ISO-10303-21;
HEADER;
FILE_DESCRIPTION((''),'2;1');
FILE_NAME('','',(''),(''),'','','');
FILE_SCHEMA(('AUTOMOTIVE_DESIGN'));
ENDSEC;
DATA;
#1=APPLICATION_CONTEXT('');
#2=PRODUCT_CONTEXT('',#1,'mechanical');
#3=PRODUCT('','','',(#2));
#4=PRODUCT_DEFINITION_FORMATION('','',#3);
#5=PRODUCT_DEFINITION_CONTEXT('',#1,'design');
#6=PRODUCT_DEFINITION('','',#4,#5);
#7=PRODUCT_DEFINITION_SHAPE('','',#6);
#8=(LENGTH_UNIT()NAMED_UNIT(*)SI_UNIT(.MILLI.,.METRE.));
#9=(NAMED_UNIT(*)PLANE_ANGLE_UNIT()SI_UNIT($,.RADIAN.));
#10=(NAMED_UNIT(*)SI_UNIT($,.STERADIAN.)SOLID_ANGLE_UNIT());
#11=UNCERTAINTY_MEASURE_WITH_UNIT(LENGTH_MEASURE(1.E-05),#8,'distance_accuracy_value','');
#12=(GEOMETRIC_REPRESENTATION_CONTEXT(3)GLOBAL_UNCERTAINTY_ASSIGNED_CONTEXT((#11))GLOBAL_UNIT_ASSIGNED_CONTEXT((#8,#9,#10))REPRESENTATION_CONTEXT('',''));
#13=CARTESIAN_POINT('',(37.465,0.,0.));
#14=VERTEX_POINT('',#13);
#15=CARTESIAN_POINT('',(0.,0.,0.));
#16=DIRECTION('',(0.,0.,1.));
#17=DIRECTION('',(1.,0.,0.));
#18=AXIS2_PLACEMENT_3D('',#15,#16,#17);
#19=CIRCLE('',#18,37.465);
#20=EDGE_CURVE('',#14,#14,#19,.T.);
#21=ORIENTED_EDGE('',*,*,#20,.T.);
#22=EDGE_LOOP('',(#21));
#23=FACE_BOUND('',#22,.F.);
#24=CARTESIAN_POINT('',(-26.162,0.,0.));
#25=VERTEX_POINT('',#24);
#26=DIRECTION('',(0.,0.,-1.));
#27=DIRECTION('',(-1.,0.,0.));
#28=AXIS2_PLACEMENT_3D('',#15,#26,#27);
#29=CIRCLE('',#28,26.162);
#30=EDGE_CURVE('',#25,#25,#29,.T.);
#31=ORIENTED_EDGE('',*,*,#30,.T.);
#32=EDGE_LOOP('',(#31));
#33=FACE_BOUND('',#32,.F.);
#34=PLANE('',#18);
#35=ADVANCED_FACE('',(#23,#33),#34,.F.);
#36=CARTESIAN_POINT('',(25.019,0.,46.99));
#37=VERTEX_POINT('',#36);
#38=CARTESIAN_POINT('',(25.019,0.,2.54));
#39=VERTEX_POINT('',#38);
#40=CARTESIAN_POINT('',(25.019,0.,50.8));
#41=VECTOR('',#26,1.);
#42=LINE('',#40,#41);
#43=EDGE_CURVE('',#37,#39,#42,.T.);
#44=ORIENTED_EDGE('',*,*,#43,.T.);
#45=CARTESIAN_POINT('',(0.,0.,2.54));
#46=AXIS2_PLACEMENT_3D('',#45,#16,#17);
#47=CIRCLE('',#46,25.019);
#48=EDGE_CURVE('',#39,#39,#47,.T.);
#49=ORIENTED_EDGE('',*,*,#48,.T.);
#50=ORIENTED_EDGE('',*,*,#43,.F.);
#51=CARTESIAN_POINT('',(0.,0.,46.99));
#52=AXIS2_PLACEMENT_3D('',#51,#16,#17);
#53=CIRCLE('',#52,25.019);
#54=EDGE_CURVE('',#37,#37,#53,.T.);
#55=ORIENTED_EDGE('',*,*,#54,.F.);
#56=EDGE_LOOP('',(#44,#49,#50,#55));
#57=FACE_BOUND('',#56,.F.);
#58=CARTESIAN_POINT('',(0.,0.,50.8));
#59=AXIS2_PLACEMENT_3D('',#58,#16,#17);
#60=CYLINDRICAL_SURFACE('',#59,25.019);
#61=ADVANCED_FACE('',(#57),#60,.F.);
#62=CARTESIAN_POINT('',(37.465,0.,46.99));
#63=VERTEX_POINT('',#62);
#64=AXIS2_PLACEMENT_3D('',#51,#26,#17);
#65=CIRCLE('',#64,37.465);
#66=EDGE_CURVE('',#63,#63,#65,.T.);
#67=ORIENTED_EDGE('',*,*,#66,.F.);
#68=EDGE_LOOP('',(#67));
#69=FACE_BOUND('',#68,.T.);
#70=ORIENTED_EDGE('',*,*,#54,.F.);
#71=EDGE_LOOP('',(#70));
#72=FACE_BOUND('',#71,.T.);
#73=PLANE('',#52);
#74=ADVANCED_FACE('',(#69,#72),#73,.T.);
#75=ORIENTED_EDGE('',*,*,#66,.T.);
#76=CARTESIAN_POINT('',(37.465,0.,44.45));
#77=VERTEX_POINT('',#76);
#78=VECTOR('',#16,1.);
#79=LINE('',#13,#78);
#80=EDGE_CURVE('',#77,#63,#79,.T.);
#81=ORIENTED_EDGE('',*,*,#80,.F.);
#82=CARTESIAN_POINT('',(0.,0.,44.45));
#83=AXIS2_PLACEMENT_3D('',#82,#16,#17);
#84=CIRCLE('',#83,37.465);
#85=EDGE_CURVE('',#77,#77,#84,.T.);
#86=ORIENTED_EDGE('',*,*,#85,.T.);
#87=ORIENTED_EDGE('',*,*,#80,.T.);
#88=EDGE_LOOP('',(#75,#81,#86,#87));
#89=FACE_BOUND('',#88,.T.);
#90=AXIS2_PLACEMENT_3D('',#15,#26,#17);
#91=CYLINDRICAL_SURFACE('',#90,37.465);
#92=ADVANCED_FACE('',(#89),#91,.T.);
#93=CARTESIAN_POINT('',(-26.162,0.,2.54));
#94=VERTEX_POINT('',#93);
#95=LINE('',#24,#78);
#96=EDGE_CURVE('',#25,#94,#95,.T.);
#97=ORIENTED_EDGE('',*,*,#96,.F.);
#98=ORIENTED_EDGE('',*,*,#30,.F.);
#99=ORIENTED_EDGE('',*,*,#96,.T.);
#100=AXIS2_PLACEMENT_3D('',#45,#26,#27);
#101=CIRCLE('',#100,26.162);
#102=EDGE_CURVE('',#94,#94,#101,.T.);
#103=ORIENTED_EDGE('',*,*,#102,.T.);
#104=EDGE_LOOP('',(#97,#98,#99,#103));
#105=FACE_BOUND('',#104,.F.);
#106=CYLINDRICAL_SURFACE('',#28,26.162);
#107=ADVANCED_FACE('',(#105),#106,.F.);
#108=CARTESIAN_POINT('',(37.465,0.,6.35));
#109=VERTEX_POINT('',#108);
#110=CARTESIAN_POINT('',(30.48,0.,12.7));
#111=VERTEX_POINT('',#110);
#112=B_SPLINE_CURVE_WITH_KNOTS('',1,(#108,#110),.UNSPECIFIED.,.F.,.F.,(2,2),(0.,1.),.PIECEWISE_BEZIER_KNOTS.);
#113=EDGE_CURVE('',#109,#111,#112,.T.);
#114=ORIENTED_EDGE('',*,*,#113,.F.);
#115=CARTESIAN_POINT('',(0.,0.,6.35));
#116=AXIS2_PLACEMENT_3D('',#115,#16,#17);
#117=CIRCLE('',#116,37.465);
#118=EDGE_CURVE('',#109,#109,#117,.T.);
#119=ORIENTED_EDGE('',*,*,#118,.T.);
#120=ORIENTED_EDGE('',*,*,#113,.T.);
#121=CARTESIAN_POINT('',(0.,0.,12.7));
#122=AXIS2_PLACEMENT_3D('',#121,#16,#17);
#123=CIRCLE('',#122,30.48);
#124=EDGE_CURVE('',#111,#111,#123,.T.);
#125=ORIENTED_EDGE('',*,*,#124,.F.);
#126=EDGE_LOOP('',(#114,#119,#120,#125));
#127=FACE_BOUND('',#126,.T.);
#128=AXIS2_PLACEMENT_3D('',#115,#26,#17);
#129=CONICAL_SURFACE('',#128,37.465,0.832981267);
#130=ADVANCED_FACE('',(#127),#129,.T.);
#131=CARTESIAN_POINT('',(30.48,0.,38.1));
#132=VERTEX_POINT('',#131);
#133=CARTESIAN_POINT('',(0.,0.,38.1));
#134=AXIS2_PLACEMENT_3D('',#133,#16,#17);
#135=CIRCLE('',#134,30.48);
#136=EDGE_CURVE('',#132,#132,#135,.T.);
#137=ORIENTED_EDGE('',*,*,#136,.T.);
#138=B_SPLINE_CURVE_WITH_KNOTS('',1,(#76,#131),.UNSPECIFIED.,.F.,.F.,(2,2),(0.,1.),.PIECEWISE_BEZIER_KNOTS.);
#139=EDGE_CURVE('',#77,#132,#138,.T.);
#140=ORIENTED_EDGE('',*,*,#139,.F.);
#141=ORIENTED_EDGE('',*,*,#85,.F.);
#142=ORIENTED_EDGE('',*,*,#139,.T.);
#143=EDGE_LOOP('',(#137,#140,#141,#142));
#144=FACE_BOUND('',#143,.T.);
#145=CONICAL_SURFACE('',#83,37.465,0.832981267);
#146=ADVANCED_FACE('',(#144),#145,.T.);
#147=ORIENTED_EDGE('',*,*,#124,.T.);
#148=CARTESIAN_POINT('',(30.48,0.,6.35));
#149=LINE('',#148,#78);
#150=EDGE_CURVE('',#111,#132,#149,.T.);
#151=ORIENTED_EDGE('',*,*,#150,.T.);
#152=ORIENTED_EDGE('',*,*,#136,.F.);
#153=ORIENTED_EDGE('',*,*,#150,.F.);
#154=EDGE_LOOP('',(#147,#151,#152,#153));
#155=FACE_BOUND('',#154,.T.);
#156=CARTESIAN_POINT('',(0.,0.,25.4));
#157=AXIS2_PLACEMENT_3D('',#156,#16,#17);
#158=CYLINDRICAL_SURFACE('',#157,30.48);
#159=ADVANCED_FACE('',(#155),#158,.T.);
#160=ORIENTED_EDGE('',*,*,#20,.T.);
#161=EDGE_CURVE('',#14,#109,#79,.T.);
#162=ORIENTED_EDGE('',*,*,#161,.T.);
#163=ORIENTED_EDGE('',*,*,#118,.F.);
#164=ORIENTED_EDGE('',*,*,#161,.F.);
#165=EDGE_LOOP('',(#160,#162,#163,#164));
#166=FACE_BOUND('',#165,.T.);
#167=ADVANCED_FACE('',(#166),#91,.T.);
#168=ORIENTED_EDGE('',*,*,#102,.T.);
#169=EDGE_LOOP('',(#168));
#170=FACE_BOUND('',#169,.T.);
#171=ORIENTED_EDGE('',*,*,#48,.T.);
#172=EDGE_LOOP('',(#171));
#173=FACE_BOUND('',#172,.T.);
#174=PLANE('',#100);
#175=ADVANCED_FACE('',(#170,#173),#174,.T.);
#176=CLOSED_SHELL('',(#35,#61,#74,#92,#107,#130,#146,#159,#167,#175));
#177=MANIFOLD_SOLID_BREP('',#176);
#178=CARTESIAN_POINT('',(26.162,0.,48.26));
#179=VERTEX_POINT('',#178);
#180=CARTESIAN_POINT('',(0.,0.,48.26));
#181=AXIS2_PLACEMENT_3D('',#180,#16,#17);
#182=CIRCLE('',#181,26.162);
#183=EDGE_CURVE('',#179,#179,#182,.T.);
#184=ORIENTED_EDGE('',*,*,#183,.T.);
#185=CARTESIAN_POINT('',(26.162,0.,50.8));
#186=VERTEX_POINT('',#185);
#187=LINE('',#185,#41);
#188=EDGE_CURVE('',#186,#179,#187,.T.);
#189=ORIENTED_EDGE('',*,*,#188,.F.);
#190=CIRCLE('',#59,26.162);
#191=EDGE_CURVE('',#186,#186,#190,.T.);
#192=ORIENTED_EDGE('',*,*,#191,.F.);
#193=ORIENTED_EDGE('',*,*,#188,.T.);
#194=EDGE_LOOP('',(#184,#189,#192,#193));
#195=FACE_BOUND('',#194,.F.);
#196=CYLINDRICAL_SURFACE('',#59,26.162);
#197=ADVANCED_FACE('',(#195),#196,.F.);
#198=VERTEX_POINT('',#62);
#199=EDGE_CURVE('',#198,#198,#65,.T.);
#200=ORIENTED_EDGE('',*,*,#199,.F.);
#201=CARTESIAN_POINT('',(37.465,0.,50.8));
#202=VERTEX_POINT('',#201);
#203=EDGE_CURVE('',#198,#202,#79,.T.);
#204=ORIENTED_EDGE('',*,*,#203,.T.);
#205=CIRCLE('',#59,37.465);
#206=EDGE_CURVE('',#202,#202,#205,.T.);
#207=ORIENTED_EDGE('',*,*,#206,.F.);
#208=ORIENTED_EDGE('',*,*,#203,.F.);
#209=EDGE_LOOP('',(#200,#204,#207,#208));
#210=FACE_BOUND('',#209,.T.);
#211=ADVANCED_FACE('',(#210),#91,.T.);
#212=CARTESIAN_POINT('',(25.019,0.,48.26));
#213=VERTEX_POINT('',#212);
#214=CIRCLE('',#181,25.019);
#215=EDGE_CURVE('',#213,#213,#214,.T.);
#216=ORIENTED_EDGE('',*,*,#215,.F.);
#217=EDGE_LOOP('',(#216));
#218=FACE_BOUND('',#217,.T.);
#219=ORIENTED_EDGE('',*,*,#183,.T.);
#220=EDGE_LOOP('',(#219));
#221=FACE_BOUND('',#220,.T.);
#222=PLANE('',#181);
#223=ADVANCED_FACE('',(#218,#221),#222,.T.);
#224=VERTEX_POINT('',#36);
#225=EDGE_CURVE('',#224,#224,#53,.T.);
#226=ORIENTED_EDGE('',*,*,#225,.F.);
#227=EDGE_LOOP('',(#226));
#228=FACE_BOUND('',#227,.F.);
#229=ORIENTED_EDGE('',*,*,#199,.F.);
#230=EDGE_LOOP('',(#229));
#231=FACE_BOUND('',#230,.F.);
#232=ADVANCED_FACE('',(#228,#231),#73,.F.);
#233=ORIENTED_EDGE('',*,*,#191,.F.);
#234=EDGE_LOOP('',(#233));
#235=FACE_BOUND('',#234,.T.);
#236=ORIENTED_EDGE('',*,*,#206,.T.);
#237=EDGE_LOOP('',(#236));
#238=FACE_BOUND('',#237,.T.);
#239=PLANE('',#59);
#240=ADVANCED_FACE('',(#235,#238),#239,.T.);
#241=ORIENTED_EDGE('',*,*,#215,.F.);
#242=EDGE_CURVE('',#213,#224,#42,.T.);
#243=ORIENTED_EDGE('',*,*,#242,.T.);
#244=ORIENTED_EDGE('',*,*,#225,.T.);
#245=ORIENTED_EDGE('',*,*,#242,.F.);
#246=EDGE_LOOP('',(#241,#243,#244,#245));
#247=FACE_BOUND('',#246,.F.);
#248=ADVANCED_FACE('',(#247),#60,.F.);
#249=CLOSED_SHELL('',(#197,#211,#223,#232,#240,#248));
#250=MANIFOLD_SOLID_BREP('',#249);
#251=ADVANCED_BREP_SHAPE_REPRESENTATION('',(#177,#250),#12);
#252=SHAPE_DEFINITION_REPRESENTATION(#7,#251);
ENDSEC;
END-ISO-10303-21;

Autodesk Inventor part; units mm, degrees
ref_plane "YZ Plane" through (0, 0, 0) normal (1, 0, 0) x (0, 1, 0)
ref_plane "XZ Plane" through (0, 0, 0) normal (0, 1, 0) x (-1, 0, 0)
sketch "Sketch1" plane through (0, 0, 0) normal (0, 0, 1) x (1, 0, 0)
  circle A0 centre (0, 0) radius 37.465
  dimension "d0" = 74.93
extrude "Extrusion1" add sketch "Sketch1" along normal blind 50.8
sketch "Sketch3" plane through (0, 0, 50.8) normal (0, 0, 1) x (1, 0, 0)
  circle A0 centre (0, 0) radius 26.162
  dimension "d6" = 52.324
extrude "Extrusion3" cut sketch "Sketch3" against normal blind 2.54
sketch "Sketch4" plane through (0, 0, 0) normal (0, 0, -1) x (-1, 0, 0)
  circle A0 centre (0, 0) radius 26.162
  dimension "d9" = 52.324
extrude "Extrusion4" cut sketch "Sketch4" against normal blind 2.54
ref_plane "Work Plane1" through (0, 0, 25.4) normal (0, 0, 1) x (1, 0, 0)
sketch "Sketch5" plane through (0, 0, 25.4) normal (0, 0, 1) x (1, 0, 0)
  circle A0 centre (0, 0) radius 30.48
  circle A1 centre (0, 0) radius 37.465
  dimension "d13" = 60.96
extrude "Extrusion5" cut sketch "Sketch5" along normal mid plane 38.1
ref_plane "Work Plane2" through (0, 0, 38.1) normal (0, 0, 1) x (1, 0, 0)
sketch "Sketch6" plane through (0, 0, 38.1) normal (0, 0, 1) x (1, 0, 0)
  circle A0 centre (0, 0) radius 30.48
  dimension "d17" = 60.96
loft "Loft1" add profiles "Sketch6" section 1 edges at (-37.465, 0, 44.45)
ref_plane "Work Plane3" through (0, 0, 12.7) normal (0, 0, 1) x (1, 0, 0)
sketch "Sketch7" plane through (0, 0, 12.7) normal (0, 0, 1) x (1, 0, 0)
  circle A0 centre (0, 0) radius 30.48
  dimension "d31" = 60.96
loft "Loft3" add profiles "Sketch7" section 1 edges at (-37.465, 0, 6.35)
sketch "Sketch2" plane through (0, 0, 50.8) normal (0, 0, 1) x (1, 0, 0)
  circle A0 centre (0, 0) radius 25.019
  dimension "d3" = 50.038
extrude "Extrusion2" cut sketch "Sketch2" against normal blind 50.8
ref_plane "Work Plane4" through (0, 0, 46.99) normal (0, 0, 1) x (1, 0, 0)
split body "Split2" result two bodies by plane through (0, 0, 46.99) normal (0, 0, 1) first body at (33.0032, 2.7789, 47.49)
properties part number "KF50tube_v1"
